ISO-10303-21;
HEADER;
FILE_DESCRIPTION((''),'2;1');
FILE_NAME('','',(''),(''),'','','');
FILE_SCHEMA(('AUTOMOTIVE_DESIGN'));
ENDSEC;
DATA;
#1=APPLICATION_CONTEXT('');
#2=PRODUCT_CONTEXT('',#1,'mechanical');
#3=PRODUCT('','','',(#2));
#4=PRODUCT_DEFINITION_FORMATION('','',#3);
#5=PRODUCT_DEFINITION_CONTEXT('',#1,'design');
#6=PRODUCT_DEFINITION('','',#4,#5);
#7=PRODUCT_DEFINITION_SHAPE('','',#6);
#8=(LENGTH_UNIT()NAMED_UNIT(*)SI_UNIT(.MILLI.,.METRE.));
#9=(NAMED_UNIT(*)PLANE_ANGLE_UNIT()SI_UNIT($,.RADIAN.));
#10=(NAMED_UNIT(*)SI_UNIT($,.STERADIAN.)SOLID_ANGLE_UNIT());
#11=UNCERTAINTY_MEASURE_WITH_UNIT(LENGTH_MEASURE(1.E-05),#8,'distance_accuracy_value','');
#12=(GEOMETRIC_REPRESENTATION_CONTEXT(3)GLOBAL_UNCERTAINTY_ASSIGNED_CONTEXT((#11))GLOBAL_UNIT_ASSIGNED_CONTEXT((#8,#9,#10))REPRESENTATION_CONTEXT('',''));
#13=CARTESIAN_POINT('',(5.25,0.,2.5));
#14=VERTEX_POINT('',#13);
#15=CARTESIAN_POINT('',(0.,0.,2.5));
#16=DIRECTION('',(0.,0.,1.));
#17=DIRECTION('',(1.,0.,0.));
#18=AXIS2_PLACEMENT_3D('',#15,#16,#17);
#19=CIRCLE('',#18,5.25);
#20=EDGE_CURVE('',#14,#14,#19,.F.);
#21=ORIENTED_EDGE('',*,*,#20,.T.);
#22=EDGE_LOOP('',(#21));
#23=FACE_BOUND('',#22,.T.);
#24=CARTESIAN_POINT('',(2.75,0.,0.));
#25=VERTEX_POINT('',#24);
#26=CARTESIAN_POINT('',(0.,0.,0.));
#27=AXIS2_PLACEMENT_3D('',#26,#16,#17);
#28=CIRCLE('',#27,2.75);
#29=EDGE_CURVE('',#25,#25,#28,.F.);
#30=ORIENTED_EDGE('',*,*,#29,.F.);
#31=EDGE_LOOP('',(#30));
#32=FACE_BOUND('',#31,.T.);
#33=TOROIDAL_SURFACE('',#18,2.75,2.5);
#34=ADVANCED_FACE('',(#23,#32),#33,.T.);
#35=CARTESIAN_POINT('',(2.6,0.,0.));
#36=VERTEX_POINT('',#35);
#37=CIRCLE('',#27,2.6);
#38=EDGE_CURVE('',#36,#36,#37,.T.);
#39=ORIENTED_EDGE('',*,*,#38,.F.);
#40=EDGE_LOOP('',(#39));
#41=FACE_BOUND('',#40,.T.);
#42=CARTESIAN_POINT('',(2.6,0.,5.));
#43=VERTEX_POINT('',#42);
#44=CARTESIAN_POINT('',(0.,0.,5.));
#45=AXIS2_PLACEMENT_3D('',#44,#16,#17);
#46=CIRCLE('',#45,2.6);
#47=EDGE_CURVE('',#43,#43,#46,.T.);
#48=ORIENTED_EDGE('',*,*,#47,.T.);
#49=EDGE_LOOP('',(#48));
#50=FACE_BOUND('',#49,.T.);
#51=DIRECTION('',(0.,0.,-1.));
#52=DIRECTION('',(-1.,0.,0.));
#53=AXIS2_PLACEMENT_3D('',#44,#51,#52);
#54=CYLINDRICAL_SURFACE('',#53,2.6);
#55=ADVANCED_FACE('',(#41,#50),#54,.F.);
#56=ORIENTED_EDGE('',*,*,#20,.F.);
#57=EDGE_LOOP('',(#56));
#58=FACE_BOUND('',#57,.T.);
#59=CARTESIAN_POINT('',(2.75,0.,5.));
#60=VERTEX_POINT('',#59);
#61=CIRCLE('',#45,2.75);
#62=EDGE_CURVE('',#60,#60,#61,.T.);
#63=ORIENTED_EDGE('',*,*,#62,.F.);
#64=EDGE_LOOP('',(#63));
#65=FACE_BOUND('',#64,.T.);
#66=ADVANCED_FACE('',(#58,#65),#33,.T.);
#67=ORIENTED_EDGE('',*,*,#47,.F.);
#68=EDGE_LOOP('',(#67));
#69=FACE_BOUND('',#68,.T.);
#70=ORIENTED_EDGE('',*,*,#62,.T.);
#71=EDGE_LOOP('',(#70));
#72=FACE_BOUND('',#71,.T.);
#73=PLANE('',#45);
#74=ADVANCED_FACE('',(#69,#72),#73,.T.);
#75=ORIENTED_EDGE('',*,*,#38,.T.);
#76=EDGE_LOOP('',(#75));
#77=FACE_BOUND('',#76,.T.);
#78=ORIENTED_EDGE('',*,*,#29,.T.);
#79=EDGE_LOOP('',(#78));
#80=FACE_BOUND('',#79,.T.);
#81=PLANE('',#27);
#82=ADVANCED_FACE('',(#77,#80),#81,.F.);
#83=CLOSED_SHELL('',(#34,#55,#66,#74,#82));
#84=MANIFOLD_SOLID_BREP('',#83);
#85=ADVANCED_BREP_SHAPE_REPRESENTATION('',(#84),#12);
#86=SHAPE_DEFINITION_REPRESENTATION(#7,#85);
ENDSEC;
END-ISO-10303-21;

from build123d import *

# Parameters (mm, degrees)
ESQUISSE1_R        = 5.25
ESQUISSE1_R_2      = 2.6
BOSS_EXTRU_1_DEPTH = 5
CONG_1_R           = 2.5


with BuildPart() as part:
    # Esquisse1 → Boss.-Extru.1 (new body)
    with BuildSketch(Plane.XY):
        Circle(ESQUISSE1_R)
        Circle(ESQUISSE1_R_2, mode=Mode.SUBTRACT)
    extrude(amount=BOSS_EXTRU_1_DEPTH)

    # Congé1
    cong_1_edges = [part.edges().sort_by_distance(p)[0] for p in [
        (-5.25, 0, 0),
        (-5.25, 0, 5),
    ]]
    fillet(cong_1_edges, radius=CONG_1_R - 0.0001)  # a hair under: the kernel refuses the full size


solid = part.part
